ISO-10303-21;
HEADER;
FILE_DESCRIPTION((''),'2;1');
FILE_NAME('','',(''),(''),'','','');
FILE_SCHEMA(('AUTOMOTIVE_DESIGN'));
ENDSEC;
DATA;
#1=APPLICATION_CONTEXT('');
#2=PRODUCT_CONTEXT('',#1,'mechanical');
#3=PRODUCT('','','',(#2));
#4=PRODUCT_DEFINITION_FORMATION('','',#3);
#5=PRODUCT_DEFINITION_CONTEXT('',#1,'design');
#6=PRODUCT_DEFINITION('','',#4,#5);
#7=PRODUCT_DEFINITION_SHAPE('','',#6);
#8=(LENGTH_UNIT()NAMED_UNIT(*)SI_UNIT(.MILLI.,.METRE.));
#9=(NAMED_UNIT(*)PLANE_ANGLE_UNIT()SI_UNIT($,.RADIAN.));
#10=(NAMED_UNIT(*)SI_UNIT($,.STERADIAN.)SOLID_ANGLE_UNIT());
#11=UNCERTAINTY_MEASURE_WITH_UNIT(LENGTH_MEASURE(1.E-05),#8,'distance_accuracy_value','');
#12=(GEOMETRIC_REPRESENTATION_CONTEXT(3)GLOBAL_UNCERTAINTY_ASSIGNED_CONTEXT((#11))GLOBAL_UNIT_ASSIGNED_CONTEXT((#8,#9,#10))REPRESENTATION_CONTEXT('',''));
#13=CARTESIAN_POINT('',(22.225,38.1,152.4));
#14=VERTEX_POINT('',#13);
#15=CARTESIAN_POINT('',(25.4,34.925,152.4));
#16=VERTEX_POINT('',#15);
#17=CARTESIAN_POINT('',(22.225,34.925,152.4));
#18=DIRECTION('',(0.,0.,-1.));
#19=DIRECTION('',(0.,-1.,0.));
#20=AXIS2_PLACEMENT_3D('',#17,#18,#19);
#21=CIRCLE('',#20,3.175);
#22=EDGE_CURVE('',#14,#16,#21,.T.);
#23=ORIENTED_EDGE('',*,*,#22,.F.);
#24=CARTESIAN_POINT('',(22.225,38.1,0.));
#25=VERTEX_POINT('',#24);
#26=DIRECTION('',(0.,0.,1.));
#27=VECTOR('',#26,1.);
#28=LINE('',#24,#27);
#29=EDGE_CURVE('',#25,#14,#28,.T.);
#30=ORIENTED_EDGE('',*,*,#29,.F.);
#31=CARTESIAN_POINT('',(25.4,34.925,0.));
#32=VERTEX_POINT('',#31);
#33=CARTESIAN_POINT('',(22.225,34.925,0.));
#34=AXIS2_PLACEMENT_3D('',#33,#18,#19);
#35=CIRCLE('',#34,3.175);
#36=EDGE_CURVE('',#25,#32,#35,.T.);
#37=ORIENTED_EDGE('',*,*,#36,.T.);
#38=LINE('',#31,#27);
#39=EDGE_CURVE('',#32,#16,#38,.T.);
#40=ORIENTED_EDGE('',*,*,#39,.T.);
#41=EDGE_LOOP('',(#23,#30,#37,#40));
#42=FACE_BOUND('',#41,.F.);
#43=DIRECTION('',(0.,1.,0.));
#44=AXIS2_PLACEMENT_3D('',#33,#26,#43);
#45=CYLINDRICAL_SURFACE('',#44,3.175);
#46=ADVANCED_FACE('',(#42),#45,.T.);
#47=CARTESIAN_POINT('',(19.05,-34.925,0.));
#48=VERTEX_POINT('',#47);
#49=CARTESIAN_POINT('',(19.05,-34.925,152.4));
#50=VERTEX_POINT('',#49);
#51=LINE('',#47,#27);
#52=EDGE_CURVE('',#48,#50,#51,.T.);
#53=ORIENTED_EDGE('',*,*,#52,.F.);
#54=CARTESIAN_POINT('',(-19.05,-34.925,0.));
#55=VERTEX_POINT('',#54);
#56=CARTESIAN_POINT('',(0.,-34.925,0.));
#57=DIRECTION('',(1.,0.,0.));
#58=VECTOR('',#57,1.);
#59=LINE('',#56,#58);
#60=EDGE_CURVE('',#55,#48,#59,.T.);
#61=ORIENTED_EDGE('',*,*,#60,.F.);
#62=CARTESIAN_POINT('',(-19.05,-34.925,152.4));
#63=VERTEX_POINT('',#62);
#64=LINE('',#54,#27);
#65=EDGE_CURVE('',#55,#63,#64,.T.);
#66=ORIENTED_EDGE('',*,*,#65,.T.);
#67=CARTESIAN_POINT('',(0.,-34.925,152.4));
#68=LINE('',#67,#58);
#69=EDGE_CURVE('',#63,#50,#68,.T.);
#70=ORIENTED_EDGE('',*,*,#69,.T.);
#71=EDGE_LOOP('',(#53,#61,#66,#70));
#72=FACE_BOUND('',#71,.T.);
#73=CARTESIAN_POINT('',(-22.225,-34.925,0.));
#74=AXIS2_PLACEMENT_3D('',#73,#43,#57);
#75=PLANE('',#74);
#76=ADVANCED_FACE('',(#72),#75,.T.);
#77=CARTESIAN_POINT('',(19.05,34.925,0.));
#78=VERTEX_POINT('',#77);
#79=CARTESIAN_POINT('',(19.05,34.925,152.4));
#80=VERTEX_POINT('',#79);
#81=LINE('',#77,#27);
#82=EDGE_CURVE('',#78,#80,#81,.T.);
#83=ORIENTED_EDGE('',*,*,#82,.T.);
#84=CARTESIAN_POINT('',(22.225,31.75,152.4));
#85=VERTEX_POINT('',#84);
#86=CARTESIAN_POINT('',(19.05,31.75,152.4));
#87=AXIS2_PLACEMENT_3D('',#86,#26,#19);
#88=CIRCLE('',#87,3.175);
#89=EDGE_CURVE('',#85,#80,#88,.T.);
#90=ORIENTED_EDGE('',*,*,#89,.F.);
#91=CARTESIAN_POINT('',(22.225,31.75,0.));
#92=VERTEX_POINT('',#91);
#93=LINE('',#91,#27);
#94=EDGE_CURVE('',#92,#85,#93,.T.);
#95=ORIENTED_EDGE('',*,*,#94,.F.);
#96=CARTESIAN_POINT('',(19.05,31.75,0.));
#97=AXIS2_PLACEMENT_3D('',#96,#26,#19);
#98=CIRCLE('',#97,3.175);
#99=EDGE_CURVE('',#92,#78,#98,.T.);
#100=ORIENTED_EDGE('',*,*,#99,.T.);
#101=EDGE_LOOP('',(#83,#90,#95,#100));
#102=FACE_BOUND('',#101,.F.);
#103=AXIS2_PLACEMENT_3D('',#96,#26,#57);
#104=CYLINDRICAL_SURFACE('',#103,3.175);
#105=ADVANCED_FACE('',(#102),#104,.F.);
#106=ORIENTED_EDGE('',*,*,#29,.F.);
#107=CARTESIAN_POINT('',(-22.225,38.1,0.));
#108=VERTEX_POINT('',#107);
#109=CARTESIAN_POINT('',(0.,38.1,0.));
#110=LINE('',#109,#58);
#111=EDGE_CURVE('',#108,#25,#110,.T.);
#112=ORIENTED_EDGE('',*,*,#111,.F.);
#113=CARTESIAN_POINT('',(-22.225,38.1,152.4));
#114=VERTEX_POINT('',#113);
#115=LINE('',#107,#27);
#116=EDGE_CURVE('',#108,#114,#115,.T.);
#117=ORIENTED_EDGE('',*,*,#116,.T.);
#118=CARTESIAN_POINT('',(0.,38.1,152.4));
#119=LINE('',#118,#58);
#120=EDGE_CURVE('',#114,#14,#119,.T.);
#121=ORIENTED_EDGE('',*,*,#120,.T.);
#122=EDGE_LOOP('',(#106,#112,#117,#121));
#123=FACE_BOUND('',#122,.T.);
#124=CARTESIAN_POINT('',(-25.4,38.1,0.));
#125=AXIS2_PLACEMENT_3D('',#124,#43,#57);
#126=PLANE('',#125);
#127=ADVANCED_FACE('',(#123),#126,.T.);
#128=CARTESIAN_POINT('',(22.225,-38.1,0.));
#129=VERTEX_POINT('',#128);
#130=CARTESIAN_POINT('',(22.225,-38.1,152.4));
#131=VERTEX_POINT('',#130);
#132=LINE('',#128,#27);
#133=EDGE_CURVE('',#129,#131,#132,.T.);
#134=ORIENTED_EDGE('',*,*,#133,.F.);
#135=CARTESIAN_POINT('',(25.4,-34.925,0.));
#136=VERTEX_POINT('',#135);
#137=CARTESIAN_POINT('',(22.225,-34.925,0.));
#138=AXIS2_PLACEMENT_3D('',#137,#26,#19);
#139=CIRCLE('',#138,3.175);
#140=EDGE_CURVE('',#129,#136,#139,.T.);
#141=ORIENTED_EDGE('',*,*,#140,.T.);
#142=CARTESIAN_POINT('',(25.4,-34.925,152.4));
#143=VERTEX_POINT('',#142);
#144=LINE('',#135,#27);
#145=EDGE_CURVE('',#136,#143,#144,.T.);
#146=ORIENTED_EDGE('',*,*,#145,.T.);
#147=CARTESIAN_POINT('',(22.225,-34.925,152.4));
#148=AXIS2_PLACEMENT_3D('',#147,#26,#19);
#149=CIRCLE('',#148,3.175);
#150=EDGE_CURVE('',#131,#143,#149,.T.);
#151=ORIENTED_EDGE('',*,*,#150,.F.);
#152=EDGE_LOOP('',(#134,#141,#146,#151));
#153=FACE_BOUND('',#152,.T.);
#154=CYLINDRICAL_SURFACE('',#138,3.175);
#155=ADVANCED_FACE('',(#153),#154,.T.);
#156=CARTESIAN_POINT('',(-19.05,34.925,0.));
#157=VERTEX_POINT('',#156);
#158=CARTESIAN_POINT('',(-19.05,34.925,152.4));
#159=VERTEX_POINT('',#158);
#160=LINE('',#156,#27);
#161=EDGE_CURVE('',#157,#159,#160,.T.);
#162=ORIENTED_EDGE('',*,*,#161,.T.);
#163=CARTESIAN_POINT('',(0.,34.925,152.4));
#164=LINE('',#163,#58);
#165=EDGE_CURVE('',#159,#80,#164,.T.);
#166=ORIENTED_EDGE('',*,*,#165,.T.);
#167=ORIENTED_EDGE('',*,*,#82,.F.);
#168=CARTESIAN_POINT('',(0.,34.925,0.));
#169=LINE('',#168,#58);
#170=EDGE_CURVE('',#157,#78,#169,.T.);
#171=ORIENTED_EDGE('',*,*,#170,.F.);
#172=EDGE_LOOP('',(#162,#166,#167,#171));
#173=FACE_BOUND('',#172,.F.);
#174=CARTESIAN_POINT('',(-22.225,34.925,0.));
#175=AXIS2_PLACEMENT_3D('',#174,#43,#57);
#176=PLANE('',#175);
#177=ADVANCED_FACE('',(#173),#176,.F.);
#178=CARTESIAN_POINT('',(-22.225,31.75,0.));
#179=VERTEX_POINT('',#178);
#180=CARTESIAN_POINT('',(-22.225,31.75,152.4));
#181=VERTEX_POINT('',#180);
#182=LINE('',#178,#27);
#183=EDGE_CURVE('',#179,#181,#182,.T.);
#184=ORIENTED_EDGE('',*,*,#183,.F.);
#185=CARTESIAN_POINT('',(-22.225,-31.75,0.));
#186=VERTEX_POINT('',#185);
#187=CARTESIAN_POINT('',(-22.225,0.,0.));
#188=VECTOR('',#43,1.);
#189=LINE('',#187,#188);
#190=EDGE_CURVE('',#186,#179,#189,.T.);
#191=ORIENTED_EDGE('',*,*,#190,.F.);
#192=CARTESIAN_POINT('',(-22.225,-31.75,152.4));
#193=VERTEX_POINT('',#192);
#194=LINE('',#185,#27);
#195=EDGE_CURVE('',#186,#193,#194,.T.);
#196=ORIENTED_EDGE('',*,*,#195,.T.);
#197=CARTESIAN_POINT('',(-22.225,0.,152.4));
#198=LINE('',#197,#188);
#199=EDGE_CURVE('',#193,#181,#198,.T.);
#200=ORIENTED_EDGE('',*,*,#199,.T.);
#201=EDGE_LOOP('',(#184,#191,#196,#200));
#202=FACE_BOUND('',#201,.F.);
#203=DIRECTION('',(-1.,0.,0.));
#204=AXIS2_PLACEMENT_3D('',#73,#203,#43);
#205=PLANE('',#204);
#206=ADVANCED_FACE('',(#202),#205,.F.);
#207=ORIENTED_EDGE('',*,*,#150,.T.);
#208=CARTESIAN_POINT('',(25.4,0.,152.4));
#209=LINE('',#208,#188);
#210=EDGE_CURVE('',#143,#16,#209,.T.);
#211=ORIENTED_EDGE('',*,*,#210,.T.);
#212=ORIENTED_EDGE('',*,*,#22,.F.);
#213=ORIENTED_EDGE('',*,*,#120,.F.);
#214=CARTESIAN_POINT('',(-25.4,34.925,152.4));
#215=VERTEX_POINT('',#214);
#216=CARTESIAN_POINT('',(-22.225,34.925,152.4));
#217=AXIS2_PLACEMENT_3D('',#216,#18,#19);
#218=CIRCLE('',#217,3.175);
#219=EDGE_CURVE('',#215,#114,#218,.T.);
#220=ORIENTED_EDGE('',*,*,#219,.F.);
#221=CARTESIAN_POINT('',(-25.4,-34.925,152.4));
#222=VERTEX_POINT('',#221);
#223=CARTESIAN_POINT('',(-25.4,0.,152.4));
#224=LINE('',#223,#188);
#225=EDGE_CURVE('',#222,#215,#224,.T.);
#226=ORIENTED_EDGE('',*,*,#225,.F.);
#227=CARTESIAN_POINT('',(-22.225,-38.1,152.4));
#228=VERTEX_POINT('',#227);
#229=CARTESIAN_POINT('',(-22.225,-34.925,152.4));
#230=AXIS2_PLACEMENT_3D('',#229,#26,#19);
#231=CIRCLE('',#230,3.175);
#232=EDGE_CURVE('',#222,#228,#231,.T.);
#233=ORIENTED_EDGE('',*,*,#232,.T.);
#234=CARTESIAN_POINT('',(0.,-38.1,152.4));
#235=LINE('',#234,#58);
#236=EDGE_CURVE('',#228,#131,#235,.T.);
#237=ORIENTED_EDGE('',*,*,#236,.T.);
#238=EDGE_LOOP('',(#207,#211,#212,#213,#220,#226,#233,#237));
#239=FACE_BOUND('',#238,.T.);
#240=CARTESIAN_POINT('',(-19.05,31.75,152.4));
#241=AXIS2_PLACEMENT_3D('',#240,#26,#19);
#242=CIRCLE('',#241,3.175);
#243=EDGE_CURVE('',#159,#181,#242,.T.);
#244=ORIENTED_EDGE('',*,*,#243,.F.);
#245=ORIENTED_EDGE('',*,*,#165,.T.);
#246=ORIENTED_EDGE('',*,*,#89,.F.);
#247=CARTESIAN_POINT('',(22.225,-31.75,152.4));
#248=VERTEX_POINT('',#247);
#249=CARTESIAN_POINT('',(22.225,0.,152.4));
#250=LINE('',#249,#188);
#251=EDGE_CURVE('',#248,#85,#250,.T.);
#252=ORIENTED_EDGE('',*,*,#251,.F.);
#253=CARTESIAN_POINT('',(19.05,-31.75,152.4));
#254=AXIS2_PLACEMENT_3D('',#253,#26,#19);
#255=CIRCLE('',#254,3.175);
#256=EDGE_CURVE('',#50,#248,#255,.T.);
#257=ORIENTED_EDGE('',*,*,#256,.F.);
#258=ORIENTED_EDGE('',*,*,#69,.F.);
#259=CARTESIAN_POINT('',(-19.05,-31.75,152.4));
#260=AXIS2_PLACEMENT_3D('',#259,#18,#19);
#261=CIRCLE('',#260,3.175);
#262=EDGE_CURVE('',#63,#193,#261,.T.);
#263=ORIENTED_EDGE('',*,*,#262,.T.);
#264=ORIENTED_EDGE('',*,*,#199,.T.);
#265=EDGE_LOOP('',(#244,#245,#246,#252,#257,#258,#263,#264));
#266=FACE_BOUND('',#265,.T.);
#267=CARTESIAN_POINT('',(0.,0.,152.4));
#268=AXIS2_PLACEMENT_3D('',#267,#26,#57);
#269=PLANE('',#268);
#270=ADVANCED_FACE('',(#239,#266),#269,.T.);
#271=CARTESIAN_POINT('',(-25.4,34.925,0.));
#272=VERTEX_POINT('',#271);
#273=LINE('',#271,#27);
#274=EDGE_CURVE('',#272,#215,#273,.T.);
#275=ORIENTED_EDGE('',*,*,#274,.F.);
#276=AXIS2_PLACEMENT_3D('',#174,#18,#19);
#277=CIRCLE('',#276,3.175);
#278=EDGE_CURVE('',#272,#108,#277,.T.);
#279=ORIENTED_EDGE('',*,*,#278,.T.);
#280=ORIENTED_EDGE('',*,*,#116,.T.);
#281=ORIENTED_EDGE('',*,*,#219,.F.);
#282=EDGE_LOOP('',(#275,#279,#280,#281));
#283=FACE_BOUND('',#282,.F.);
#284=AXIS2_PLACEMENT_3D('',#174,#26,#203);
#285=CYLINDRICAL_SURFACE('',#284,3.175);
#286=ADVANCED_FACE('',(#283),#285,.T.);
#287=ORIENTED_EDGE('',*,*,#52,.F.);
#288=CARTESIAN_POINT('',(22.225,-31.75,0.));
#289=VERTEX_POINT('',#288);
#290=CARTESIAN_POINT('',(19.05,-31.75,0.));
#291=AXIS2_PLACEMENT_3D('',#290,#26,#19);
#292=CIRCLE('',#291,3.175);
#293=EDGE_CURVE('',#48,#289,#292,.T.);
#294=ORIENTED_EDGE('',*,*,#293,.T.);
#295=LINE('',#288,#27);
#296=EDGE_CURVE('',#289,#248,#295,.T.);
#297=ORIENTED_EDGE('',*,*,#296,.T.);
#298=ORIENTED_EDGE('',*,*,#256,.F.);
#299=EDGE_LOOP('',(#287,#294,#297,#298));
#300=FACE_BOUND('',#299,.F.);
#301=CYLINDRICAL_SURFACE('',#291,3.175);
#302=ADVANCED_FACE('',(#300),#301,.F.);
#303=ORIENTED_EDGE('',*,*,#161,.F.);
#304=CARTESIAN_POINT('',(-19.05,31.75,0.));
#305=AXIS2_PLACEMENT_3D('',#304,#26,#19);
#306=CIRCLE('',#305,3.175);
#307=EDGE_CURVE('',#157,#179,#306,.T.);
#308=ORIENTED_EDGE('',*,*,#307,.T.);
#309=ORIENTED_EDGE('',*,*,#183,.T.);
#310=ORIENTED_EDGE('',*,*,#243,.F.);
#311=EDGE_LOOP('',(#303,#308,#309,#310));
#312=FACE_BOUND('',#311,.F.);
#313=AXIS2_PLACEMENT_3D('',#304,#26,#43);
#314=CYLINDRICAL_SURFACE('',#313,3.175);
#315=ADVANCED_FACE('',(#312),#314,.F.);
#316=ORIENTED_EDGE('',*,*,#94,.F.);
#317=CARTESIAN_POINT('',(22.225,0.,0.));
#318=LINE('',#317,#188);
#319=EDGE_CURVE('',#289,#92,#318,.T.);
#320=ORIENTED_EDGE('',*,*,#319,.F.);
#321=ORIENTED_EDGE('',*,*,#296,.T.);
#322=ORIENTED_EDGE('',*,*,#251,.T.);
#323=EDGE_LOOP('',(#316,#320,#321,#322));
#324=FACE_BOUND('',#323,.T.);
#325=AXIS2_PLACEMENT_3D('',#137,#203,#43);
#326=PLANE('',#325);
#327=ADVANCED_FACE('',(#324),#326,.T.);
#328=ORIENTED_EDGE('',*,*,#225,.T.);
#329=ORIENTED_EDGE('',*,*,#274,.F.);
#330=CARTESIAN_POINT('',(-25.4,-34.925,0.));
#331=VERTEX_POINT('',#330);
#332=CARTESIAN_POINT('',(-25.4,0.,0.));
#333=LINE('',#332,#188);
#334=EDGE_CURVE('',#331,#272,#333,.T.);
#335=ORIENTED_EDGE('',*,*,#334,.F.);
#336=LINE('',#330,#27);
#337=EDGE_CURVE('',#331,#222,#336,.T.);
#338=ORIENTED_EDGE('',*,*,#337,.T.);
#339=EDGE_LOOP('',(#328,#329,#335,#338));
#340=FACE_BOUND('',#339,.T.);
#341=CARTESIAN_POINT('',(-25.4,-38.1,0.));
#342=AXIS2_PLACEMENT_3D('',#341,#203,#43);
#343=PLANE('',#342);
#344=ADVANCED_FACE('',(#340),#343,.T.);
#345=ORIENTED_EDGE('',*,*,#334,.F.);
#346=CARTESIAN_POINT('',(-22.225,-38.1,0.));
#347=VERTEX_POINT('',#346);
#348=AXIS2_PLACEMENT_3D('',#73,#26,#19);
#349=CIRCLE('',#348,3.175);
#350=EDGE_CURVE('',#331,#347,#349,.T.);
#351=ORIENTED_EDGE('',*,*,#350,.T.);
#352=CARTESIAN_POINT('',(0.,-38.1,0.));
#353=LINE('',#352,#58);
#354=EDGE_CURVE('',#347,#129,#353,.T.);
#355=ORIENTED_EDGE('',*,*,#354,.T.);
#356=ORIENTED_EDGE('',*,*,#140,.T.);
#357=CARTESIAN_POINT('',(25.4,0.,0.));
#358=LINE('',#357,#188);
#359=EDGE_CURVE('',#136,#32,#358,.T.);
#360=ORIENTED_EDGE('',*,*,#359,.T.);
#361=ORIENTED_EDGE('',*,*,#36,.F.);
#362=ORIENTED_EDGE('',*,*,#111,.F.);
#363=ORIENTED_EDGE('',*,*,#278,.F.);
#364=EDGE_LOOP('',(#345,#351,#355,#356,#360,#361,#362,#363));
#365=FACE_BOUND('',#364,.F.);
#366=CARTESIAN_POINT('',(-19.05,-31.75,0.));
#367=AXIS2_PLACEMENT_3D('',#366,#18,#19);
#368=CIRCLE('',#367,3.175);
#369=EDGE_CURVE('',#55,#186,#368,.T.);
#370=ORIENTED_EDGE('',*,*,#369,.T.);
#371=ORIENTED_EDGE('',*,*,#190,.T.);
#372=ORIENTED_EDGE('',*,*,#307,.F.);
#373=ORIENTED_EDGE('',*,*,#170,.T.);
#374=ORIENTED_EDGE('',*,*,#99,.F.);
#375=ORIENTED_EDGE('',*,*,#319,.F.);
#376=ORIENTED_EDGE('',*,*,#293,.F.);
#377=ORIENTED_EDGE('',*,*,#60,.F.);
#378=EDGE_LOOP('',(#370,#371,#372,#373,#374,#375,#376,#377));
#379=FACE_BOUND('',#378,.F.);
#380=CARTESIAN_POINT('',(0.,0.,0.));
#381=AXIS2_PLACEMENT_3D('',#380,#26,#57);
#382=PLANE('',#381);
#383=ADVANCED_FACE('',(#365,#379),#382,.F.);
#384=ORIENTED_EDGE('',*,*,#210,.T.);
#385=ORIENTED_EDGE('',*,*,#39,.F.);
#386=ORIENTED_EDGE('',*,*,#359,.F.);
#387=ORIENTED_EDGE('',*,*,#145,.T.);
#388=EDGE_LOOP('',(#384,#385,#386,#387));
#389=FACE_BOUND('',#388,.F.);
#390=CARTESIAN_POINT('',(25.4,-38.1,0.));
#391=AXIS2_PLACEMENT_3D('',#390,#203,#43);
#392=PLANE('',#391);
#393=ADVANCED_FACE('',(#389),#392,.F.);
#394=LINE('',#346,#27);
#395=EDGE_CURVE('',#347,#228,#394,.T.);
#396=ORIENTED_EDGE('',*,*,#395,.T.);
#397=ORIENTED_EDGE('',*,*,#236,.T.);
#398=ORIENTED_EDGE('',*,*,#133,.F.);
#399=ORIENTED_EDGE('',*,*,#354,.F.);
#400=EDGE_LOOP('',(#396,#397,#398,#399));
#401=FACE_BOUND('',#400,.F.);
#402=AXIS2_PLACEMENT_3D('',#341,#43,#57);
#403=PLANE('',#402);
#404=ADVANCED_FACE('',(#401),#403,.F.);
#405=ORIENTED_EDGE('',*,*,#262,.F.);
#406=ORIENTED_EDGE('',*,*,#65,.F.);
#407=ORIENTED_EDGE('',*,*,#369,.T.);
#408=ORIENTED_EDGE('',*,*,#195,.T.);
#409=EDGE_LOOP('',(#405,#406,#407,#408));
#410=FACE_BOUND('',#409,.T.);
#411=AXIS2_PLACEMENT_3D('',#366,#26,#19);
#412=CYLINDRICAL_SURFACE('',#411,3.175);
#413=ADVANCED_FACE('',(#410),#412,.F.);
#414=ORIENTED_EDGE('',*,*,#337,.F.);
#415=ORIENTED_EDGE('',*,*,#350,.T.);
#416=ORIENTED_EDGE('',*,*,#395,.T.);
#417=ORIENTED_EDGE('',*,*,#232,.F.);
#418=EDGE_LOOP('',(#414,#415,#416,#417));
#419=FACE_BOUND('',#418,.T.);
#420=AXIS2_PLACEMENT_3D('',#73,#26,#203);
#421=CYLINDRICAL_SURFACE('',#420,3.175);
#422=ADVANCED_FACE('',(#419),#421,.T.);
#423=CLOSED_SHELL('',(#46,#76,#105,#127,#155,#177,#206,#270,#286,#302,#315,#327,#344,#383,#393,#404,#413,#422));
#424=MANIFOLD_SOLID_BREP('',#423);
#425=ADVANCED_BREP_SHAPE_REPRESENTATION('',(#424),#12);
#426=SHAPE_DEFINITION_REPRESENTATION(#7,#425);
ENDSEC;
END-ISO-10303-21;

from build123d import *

# Parameters (mm, degrees)
F0_W     = 50.8
F0_H     = 76.2
F0_W_2   = 44.45
F0_H_2   = 69.85
F2_DEPTH = 152.4
F3_R     = 3.175


# Not quite as in the source:
# - a variable given as a bare number and used for a length is read in inches; the dataset says mm whatever the document's units were


with BuildPart() as f2:
    # F0 (on Top) → F2 (new body)
    with BuildSketch(Plane.XY):
        Rectangle(F0_W, F0_H)
        Rectangle(F0_W_2, F0_H_2, mode=Mode.SUBTRACT)
    extrude(amount=F2_DEPTH)

    # F3
    f3_edges = [f2.edges().sort_by_distance(p)[0] for p in [
        (-22.225, 34.925, 76.2),
        (22.225, 34.925, 76.2),
        (22.225, -34.925, 76.2),
        (-22.225, -34.925, 76.2),
        (25.4, 38.1, 76.2),
        (-25.4, 38.1, 76.2),
        (25.4, -38.1, 76.2),
        (-25.4, -38.1, 76.2),
    ]]
    fillet(f3_edges, radius=F3_R)


solid = f2.part
